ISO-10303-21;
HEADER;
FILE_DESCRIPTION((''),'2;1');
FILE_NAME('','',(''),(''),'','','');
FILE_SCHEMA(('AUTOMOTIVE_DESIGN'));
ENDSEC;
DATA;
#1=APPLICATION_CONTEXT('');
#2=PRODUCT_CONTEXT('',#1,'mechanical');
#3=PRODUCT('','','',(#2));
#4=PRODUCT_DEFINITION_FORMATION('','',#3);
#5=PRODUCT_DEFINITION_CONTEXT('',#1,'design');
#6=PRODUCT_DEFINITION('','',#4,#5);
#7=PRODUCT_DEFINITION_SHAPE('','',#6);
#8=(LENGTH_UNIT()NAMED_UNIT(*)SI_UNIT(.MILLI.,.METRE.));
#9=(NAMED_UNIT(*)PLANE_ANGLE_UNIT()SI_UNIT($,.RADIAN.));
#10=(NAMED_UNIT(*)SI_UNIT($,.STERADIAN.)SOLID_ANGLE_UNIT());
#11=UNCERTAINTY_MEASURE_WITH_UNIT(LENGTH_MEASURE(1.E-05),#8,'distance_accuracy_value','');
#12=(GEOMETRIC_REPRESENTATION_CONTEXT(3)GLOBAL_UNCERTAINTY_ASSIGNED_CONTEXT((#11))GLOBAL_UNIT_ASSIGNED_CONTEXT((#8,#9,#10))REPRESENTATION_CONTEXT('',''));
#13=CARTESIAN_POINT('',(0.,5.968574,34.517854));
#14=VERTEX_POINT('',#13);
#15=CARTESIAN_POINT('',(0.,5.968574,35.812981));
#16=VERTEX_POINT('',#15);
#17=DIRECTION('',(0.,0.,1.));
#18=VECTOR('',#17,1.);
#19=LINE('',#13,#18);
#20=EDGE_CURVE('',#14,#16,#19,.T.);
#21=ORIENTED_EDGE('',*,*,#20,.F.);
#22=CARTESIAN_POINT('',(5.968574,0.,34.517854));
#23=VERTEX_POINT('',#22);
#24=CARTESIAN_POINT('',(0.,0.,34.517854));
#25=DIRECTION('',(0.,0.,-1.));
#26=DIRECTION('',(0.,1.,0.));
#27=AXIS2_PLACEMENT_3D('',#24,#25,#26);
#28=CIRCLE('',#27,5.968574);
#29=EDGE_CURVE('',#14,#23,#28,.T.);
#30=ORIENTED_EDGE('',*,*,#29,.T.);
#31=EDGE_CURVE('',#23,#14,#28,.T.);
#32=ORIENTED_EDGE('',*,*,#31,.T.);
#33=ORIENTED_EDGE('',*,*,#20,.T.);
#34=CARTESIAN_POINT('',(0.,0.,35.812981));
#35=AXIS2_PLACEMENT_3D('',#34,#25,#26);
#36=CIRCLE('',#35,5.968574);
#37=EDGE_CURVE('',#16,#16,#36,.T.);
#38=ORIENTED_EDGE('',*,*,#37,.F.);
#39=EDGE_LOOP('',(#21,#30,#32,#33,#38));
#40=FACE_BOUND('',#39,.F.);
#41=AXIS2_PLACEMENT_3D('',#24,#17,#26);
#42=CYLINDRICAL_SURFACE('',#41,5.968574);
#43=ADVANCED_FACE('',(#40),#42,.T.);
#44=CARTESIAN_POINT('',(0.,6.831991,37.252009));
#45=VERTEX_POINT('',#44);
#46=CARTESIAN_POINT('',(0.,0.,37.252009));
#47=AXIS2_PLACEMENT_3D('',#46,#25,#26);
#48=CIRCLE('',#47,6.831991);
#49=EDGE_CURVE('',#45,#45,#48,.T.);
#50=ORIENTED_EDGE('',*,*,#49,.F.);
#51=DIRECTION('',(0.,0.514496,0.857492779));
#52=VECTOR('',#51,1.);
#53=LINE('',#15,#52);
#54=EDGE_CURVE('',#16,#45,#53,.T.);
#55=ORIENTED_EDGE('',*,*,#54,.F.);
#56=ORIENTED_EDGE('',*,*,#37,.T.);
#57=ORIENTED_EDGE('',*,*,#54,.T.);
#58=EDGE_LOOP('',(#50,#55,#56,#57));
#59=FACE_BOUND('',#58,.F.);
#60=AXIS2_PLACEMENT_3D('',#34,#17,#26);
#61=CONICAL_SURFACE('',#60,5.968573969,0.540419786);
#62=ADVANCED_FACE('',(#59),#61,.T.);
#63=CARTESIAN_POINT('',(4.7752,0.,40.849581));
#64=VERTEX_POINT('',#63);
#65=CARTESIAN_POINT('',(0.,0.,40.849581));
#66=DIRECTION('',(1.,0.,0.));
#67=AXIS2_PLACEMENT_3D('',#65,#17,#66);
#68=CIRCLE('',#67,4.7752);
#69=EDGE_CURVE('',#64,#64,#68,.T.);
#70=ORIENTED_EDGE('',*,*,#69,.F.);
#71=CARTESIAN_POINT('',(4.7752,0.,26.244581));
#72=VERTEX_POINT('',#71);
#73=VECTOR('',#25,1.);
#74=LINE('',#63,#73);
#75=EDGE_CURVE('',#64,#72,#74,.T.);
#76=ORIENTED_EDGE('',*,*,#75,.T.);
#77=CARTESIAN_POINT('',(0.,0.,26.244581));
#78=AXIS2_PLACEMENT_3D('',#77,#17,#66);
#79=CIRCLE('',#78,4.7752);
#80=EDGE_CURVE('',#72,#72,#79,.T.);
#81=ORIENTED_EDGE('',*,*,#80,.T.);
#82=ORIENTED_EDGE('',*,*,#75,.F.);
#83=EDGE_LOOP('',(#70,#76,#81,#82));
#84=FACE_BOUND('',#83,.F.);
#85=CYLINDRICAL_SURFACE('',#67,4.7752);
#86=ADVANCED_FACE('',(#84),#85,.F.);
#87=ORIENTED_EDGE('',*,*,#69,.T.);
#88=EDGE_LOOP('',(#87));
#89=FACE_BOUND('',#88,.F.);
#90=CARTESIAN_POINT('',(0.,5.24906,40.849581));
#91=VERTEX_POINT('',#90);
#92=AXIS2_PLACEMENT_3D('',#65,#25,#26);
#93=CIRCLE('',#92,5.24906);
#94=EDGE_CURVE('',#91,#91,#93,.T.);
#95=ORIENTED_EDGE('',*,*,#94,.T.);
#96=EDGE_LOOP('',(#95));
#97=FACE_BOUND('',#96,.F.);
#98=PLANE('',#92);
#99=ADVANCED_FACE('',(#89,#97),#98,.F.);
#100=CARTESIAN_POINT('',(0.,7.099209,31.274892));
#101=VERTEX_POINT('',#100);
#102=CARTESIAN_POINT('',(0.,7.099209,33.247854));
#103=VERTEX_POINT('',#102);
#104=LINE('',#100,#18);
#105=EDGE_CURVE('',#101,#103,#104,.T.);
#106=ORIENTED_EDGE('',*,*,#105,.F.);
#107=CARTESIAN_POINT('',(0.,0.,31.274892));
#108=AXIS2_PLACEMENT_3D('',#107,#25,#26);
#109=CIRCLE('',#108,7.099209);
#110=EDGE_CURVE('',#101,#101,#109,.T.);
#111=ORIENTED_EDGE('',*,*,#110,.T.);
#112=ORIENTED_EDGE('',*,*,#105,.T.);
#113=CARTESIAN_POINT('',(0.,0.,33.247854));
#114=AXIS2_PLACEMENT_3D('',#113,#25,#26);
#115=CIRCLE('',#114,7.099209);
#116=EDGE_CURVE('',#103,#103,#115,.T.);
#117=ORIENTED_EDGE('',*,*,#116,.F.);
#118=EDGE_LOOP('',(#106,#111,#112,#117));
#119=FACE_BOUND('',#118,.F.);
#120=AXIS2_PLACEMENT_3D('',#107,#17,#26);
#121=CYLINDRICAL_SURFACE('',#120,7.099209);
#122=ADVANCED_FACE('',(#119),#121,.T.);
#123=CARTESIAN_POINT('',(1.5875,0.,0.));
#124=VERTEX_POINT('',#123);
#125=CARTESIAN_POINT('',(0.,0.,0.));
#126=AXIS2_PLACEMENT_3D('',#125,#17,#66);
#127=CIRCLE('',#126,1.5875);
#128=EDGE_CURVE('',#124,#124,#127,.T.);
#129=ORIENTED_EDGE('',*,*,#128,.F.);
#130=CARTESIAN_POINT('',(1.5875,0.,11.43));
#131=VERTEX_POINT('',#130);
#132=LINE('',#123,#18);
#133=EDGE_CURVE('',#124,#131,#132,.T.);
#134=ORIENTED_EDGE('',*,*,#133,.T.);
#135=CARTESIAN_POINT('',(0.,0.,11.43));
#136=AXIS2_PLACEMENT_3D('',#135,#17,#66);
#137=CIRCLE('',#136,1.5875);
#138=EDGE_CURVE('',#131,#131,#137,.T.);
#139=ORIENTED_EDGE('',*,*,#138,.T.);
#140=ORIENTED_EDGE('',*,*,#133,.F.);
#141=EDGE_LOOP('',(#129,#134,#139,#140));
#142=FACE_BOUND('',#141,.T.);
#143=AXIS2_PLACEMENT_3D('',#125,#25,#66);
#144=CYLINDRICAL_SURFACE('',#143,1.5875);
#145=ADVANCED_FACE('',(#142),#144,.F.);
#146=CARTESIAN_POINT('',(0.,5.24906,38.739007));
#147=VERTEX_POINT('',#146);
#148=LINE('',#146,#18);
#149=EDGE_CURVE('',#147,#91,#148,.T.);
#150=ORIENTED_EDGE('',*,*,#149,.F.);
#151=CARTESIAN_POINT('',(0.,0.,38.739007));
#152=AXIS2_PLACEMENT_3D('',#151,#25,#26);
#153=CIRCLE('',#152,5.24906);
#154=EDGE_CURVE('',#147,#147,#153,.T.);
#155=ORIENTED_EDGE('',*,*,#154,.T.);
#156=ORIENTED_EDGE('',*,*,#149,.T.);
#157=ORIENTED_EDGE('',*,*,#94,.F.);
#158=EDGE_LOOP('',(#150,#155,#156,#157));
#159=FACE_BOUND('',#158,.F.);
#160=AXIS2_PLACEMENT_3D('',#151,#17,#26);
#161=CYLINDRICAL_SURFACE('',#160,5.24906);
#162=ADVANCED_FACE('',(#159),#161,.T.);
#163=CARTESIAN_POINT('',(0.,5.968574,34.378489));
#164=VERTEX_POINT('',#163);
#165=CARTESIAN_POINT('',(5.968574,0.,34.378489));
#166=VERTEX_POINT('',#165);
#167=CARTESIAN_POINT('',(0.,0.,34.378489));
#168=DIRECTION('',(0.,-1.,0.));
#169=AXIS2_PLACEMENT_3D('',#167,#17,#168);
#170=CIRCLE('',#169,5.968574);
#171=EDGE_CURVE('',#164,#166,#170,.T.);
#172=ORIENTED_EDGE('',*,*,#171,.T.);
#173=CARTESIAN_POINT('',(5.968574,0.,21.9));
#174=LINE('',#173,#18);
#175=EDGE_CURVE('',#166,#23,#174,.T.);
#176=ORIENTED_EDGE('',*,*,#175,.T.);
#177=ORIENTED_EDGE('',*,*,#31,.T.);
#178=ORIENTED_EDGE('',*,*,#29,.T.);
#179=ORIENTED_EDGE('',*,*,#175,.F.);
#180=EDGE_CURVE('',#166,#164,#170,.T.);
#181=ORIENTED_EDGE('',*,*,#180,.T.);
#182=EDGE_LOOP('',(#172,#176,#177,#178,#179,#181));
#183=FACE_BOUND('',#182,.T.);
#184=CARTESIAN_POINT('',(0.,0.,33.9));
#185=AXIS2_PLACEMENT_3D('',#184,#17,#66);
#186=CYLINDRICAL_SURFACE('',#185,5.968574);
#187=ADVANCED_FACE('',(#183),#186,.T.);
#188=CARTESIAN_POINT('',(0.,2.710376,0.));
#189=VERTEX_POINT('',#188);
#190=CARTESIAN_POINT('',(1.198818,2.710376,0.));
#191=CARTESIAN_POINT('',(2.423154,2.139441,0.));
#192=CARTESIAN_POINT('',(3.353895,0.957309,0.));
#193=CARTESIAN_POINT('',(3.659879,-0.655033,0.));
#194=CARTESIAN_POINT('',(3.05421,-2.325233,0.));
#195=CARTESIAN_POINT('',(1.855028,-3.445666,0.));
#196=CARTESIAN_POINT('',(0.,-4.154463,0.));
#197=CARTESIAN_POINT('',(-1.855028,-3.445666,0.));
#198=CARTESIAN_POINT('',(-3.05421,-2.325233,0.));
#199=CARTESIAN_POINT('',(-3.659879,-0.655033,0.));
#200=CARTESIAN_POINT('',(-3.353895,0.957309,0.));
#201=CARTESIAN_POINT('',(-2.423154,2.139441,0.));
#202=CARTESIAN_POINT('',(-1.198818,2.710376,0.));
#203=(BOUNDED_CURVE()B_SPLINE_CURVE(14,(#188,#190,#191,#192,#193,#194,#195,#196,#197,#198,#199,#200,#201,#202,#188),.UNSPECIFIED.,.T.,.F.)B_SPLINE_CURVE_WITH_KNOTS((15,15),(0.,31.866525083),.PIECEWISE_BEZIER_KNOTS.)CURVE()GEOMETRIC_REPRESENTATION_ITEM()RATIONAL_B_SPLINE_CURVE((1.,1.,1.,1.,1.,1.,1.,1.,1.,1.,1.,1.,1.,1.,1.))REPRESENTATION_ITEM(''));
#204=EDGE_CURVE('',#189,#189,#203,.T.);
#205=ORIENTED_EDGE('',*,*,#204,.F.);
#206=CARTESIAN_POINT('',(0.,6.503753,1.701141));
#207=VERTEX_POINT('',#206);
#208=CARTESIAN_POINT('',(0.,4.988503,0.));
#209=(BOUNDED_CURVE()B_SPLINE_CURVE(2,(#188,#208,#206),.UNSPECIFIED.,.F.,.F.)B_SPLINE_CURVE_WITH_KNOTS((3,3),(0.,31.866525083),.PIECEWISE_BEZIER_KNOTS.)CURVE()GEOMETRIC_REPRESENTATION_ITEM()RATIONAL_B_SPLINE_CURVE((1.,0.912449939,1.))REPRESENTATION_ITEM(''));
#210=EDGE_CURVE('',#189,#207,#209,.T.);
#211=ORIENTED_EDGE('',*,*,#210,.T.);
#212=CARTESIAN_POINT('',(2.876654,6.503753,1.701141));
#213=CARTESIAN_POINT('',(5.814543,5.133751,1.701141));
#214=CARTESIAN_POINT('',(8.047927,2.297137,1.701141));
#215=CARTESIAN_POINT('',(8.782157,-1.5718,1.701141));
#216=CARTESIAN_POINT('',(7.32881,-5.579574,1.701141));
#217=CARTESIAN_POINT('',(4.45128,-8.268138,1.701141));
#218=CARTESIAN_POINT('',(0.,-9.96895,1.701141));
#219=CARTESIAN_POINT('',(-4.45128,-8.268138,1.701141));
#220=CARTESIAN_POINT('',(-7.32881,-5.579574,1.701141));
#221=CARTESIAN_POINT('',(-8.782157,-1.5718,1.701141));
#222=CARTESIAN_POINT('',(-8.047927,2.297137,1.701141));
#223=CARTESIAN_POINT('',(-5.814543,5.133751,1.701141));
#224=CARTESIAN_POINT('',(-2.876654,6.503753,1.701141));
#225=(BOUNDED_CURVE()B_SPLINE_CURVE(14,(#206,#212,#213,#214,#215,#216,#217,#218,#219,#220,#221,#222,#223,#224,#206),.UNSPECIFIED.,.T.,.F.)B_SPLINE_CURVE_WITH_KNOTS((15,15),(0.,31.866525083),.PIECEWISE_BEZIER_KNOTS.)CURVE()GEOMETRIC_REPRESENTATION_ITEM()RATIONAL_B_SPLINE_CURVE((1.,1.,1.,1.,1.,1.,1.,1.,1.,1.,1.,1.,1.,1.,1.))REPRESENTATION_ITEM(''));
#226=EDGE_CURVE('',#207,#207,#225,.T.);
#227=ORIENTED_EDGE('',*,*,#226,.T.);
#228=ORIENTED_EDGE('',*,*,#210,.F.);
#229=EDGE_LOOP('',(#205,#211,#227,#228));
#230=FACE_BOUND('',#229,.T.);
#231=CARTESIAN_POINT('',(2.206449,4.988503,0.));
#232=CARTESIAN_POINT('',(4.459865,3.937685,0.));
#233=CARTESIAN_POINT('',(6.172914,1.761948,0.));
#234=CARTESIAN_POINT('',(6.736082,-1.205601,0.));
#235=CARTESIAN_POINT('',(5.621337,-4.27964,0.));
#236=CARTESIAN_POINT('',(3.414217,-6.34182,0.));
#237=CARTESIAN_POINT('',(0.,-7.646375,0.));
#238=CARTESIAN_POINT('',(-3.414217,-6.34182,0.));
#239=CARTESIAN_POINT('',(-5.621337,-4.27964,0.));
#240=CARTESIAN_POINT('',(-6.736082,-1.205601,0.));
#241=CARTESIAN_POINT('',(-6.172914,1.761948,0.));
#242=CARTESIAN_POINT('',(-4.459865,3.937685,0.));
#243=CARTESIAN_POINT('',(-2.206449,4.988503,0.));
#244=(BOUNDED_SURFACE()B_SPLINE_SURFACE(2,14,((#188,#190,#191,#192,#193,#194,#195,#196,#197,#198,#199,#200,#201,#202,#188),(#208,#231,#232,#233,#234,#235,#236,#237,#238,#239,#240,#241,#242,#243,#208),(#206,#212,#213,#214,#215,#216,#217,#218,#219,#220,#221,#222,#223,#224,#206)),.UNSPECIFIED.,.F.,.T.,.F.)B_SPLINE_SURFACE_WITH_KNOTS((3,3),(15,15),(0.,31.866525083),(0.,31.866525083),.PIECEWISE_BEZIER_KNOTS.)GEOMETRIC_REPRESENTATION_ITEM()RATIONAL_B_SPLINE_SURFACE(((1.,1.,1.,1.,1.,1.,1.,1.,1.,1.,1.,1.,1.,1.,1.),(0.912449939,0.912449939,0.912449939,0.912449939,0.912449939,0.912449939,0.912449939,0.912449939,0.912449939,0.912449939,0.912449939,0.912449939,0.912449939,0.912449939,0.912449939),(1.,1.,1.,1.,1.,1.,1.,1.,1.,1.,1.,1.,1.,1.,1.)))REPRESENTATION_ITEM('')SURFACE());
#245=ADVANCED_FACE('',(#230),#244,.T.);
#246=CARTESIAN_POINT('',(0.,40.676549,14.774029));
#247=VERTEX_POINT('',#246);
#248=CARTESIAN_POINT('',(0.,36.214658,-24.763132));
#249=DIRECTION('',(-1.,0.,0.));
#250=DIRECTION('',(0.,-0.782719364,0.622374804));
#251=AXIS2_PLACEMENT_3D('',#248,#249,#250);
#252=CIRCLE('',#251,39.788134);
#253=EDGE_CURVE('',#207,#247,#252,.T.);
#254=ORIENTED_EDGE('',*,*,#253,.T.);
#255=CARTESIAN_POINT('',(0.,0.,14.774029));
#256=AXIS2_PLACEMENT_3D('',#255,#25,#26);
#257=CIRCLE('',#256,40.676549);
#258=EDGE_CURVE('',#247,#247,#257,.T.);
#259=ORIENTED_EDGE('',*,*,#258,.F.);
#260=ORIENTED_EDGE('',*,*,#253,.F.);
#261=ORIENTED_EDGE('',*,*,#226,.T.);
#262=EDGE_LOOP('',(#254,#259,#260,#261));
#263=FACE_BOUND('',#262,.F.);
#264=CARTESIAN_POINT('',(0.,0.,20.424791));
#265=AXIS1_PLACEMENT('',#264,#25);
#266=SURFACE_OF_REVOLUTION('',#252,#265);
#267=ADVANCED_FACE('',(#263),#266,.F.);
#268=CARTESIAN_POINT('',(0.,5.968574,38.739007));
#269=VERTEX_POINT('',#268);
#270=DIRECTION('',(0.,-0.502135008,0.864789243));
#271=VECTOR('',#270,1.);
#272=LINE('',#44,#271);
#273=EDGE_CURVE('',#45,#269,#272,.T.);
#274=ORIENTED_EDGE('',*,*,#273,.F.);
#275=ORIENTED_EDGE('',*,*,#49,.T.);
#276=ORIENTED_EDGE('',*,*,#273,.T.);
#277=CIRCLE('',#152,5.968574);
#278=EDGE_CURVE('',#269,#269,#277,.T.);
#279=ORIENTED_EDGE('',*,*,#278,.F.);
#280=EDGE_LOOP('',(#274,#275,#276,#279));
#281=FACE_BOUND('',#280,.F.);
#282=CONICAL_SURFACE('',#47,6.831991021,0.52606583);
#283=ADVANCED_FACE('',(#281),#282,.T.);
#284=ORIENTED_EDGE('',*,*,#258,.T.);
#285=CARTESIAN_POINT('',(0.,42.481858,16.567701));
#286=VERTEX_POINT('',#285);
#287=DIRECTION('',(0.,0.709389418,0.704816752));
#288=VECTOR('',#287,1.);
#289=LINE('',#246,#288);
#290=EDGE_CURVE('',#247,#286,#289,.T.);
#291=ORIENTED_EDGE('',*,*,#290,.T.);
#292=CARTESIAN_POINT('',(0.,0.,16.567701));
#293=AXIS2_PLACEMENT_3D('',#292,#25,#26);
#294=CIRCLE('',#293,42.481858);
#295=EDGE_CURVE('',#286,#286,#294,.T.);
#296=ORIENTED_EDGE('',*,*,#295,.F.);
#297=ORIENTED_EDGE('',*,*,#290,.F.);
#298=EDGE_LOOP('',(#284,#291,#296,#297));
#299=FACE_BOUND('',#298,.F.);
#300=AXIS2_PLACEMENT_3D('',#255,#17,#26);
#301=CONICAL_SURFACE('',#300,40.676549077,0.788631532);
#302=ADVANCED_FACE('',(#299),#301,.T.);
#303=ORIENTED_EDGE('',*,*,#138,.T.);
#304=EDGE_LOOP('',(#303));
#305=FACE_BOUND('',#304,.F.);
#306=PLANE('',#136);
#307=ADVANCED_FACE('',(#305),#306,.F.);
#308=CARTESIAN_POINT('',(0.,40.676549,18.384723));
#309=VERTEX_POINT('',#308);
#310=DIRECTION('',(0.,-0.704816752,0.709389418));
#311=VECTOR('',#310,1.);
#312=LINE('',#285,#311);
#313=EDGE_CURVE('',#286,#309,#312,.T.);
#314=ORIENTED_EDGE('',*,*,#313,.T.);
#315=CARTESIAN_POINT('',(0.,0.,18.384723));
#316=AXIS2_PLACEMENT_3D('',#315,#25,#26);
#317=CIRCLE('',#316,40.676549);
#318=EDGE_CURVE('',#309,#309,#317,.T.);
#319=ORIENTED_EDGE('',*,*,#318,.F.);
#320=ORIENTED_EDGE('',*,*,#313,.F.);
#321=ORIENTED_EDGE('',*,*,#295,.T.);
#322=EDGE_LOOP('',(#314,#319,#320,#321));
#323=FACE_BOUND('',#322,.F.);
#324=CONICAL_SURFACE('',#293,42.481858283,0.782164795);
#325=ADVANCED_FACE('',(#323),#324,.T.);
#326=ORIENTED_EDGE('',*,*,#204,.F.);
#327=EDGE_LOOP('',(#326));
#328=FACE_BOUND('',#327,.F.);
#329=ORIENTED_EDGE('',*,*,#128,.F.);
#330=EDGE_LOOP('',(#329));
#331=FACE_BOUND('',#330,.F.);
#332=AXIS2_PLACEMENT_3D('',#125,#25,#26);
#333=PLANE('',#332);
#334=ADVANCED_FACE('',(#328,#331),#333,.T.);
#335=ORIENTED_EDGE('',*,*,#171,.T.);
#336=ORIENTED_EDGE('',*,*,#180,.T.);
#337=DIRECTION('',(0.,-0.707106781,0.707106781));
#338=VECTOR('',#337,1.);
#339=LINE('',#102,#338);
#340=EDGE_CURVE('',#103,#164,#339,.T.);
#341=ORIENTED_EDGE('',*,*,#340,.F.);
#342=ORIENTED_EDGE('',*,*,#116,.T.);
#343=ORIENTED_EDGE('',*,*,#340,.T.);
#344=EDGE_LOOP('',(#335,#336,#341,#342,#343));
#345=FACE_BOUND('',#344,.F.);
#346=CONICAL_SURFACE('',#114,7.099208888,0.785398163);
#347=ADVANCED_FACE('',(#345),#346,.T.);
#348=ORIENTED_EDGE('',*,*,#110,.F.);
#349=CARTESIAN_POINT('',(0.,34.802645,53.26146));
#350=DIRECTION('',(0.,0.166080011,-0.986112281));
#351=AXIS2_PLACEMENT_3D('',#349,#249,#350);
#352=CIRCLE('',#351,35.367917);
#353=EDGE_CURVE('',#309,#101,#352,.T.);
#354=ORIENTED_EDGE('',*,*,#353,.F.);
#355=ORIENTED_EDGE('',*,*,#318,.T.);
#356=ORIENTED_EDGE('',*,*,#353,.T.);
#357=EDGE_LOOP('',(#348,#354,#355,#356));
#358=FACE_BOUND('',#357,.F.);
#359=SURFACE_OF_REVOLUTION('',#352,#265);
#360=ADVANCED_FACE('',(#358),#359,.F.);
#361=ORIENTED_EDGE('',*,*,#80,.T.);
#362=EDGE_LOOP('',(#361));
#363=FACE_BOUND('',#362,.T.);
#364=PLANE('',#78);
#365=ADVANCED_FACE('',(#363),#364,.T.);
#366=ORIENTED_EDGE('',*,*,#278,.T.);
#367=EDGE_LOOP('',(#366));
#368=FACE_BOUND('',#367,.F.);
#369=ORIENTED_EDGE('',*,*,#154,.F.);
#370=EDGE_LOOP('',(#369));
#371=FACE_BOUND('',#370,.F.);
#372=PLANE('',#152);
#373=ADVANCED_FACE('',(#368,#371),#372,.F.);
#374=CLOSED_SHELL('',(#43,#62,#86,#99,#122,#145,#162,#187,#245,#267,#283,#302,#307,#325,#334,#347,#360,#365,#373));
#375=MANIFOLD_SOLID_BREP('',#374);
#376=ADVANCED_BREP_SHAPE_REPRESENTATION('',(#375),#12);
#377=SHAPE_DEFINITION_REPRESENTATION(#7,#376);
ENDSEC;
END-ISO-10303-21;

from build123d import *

# Parameters (mm, degrees)
F2_R        = 5.08
F3_S5_R     = 5.9685739689
F3_T6_DEPTH = 12
F4_R        = 4.7752
F5_DEPTH    = 14.605
F6_R        = 1.6002
F7_DEPTH    = 11.43
F8_R        = 1.5875
F9_DEPTH    = 11.43


# Not quite as in the source:
# - a fillet or chamfer that OpenCascade refuses, or shapes differently, is made with other operations: its cross-section is extruded or revolved along the edge and cut away or added


with BuildPart() as f1:
    # F0 (on Right) → F1 (revolve)
    with BuildSketch(Plane.YZ):
        with BuildLine():
            Line((0, 40.8495813608), (0, 0))
            Line((0, 0), (5.0717149861, 0))
            ThreePointArc((5.0717149861, 0), (20.9654737991, 11.9868064796), (40.676549077, 14.7740291432))
            Line((40.676549077, 14.7740291432), (42.4818582833, 16.5677014738))
            Line((42.4818582833, 16.5677014738), (40.676549077, 18.3847230526))
            ThreePointArc((40.676549077, 18.3847230526), (22.1270293001, 20.2430061627), (7.0992088877, 31.2748923898))
            Line((7.0992088877, 31.2748923898), (7.0992088877, 34.5178544521))
            Line((7.0992088877, 34.5178544521), (5.9685739689, 34.5178544521))
            Line((5.9685739689, 34.5178544521), (5.9685739689, 35.8129814267))
            Line((5.9685739689, 35.8129814267), (6.8319910206, 37.2520089149))
            Line((6.8319910206, 37.2520089149), (5.9685739689, 38.7390069664))
            Line((5.9685739689, 38.7390069664), (5.2490597591, 38.7390069664))
            Line((5.2490597591, 38.7390069664), (5.2490597591, 40.8495813608))
            Line((5.2490597591, 40.8495813608), (0, 40.8495813608))
        make_face()
    revolve(axis=Axis((0, 0, 20.4247906804), (0, 0, -1)))

    # F2
    f2_edges = [f1.edges().sort_by_distance(p)[0] for p in [
        (0, -5.071715, 0),
    ]]
    fillet(f2_edges, radius=F2_R)

    # F3: chamfer of 1.27 on 1 edges, made by hand


with BuildPart() as f3_tool2:
    # F3_s3 → F3_t4 (revolve)
    with BuildSketch(Plane.YZ):
        Polygon((7.0992088877, 33.2478544521), (5.8292088877, 34.5178544521), (7.0992088877, 34.5178544521), align=None)
    revolve(axis=Axis((0, 0, 34.5178544521), (0, 0, -1)))

    # F3_s5 → F3_t6 (cut, symmetric)
    with BuildSketch(Plane.XY.offset(33.9)):
        Circle(F3_S5_R)
    extrude(amount=F3_T6_DEPTH, both=True, mode=Mode.SUBTRACT)


with BuildPart() as f1_1:
    add(f1.part)

    # F3_t1: cut F3_tool2
    add(f3_tool2.part, mode=Mode.SUBTRACT)

    # F4 (on face) → F5 (cut)
    with BuildSketch(Plane.XY.offset(40.8495813608)):
        Circle(F4_R)
    extrude(amount=-F5_DEPTH, mode=Mode.SUBTRACT)

    # F6 (on face) → F7 (join)
    with BuildSketch(Plane(origin=(0, 0, 0), x_dir=(1, 0, 0), z_dir=(0, 0, -1))):
        Circle(F6_R)
    extrude(amount=-F7_DEPTH)

    # F8 (on Top) → F9 (cut)
    with BuildSketch(Plane.XY):
        Circle(F8_R)
    extrude(amount=F9_DEPTH, mode=Mode.SUBTRACT)


solid = f1_1.part
